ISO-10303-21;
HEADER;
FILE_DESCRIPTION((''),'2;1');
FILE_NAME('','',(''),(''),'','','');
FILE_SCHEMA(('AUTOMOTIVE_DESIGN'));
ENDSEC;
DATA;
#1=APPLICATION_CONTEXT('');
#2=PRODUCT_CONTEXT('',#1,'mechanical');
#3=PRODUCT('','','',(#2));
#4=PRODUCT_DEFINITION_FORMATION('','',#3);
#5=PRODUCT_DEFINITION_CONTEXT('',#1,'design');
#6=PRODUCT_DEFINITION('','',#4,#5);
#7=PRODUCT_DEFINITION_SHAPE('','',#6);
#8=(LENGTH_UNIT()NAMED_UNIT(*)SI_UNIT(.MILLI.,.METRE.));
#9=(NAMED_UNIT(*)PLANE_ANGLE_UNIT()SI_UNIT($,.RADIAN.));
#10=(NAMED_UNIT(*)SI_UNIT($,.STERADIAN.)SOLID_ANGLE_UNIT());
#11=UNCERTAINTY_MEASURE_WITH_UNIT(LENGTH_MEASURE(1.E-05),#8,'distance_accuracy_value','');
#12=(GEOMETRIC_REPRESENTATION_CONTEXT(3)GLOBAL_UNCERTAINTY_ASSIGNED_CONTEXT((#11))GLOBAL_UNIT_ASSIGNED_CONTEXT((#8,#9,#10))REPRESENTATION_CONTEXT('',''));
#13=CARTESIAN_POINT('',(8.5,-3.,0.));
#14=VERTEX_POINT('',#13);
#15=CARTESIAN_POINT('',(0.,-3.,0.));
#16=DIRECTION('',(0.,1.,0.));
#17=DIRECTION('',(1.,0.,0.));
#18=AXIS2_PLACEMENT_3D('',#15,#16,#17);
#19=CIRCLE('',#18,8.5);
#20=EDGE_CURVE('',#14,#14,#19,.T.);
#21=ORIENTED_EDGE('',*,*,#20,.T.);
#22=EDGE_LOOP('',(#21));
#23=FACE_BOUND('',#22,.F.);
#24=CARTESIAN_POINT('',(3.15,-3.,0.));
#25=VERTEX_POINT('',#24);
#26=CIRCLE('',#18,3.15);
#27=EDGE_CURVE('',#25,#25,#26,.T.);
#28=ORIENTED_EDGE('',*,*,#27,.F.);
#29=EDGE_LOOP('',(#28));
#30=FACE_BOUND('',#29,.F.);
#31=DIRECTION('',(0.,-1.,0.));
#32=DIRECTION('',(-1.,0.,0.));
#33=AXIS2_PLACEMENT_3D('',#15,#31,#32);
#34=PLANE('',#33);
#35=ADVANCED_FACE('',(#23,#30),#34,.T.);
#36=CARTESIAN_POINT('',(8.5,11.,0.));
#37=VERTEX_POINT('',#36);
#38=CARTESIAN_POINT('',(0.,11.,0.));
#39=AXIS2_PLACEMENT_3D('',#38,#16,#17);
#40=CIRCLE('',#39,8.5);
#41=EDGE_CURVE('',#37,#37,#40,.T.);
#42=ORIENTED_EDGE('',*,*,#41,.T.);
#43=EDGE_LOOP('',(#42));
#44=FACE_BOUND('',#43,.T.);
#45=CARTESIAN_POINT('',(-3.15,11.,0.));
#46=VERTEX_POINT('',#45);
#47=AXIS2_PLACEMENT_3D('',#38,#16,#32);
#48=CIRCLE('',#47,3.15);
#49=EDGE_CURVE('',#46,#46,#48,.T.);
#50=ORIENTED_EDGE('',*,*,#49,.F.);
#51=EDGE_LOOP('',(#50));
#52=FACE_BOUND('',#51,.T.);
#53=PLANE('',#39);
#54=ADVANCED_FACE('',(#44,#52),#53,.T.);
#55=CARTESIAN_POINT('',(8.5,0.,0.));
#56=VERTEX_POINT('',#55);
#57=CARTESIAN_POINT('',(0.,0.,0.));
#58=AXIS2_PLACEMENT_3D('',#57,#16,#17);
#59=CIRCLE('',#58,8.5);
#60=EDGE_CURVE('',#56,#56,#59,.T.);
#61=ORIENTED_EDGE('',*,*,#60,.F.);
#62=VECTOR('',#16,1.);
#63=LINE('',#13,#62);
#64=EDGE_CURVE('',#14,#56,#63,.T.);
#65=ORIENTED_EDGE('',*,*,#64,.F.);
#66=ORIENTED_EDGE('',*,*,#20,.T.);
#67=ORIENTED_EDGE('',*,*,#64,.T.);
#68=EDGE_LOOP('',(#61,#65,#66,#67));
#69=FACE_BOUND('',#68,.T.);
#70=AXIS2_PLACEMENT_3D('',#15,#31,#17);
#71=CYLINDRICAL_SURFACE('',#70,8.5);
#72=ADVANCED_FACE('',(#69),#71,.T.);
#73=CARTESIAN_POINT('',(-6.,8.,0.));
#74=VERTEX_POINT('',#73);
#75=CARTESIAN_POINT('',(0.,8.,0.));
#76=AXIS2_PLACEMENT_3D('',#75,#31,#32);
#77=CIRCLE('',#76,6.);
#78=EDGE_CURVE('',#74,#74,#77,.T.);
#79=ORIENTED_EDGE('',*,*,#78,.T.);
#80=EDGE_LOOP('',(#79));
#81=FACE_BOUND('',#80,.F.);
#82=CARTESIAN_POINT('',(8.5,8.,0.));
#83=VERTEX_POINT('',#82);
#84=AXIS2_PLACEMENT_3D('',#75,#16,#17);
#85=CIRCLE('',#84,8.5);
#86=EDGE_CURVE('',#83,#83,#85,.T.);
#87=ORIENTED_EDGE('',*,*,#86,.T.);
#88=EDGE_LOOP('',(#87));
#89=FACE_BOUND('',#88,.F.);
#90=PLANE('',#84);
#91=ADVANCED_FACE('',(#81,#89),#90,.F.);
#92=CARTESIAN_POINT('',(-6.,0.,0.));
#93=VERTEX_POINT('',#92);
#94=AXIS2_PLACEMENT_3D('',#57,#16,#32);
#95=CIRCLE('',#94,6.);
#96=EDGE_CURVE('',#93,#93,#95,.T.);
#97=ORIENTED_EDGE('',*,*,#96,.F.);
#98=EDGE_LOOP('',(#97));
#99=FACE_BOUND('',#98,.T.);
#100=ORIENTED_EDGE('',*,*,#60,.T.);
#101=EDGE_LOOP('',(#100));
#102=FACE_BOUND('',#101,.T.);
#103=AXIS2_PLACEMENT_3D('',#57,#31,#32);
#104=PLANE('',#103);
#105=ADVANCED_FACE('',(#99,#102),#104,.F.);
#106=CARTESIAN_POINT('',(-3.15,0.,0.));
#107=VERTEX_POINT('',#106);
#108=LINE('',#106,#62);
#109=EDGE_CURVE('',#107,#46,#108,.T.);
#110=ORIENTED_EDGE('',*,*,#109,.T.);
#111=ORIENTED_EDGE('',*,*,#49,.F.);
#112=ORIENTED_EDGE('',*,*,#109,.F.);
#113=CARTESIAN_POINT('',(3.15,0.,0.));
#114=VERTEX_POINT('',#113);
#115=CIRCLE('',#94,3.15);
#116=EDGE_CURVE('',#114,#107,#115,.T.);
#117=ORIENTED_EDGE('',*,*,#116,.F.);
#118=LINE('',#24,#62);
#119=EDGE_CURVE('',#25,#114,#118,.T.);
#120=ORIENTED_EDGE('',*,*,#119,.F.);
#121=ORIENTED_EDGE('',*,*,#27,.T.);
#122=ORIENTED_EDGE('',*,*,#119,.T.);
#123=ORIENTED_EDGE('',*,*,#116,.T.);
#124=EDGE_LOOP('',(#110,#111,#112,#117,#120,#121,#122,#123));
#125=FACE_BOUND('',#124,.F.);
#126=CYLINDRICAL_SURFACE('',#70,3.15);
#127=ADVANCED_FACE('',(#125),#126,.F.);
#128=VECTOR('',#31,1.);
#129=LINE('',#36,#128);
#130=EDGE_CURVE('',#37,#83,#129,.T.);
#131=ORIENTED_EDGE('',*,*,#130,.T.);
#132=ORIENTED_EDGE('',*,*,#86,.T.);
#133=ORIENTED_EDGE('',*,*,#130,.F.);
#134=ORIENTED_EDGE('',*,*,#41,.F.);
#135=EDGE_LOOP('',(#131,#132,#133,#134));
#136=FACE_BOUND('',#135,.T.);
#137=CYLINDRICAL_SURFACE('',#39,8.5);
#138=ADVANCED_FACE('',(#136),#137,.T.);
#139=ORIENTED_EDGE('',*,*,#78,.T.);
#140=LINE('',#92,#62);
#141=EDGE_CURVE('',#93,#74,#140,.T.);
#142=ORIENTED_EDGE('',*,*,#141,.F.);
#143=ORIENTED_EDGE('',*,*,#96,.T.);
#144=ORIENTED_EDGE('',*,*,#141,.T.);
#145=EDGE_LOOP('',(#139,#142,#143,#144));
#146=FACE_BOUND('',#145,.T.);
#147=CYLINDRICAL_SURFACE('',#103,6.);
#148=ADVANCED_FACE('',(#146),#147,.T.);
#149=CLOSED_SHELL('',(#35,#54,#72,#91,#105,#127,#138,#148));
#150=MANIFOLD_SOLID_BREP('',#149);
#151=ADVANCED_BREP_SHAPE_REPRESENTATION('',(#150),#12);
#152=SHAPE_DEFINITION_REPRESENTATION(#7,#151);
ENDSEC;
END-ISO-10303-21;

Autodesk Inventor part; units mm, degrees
ref_plane "YZ Plane" through (0, 0, 0) normal (1, 0, 0) x (0, 1, 0)
ref_plane "XZ Plane" through (0, 0, 0) normal (0, 1, 0) x (-1, 0, 0)
ref_plane "XY Plane" through (0, 0, 0) normal (0, 0, 1) x (1, 0, 0)
sketch "Sketch1" plane through (0, 0, 0) normal (0, 1, 0) x (-1, 0, 0)
  circle A0 centre (0, 0) radius 3.15
  circle A1 centre (0, 0) radius 6
  dimension "d0" = 6.3
  dimension "d2" = 12
extrude "Extrusion1" add sketch "Sketch1" along normal blind 11
sketch "Sketch2" plane through (0, 11, 0) normal (0, 1, 0) x (1, 0, 0)
  circle A0 centre (0, 0) radius 2.6288
  circle A1 centre (0, 0) radius 3.15 projected
  circle A2 centre (0, 0) radius 8.5
  dimension "d5" = 17
extrude "Extrusion2" add sketch "Sketch2" against normal blind 3 contours A2
ref_plane "Work Plane1" through (0, 4, 0) normal (0, -1, 0) x (1, 0, 0)
mirror "Mirror1" about plane through (0, 4, 0) normal (0, -1, 0) of "Extrusion2"
ref_plane "Work Plane2" through (0, 4, 0) normal (0, -1, 0) x (1, 0, 0)
properties part number "Belt tensor V2"
